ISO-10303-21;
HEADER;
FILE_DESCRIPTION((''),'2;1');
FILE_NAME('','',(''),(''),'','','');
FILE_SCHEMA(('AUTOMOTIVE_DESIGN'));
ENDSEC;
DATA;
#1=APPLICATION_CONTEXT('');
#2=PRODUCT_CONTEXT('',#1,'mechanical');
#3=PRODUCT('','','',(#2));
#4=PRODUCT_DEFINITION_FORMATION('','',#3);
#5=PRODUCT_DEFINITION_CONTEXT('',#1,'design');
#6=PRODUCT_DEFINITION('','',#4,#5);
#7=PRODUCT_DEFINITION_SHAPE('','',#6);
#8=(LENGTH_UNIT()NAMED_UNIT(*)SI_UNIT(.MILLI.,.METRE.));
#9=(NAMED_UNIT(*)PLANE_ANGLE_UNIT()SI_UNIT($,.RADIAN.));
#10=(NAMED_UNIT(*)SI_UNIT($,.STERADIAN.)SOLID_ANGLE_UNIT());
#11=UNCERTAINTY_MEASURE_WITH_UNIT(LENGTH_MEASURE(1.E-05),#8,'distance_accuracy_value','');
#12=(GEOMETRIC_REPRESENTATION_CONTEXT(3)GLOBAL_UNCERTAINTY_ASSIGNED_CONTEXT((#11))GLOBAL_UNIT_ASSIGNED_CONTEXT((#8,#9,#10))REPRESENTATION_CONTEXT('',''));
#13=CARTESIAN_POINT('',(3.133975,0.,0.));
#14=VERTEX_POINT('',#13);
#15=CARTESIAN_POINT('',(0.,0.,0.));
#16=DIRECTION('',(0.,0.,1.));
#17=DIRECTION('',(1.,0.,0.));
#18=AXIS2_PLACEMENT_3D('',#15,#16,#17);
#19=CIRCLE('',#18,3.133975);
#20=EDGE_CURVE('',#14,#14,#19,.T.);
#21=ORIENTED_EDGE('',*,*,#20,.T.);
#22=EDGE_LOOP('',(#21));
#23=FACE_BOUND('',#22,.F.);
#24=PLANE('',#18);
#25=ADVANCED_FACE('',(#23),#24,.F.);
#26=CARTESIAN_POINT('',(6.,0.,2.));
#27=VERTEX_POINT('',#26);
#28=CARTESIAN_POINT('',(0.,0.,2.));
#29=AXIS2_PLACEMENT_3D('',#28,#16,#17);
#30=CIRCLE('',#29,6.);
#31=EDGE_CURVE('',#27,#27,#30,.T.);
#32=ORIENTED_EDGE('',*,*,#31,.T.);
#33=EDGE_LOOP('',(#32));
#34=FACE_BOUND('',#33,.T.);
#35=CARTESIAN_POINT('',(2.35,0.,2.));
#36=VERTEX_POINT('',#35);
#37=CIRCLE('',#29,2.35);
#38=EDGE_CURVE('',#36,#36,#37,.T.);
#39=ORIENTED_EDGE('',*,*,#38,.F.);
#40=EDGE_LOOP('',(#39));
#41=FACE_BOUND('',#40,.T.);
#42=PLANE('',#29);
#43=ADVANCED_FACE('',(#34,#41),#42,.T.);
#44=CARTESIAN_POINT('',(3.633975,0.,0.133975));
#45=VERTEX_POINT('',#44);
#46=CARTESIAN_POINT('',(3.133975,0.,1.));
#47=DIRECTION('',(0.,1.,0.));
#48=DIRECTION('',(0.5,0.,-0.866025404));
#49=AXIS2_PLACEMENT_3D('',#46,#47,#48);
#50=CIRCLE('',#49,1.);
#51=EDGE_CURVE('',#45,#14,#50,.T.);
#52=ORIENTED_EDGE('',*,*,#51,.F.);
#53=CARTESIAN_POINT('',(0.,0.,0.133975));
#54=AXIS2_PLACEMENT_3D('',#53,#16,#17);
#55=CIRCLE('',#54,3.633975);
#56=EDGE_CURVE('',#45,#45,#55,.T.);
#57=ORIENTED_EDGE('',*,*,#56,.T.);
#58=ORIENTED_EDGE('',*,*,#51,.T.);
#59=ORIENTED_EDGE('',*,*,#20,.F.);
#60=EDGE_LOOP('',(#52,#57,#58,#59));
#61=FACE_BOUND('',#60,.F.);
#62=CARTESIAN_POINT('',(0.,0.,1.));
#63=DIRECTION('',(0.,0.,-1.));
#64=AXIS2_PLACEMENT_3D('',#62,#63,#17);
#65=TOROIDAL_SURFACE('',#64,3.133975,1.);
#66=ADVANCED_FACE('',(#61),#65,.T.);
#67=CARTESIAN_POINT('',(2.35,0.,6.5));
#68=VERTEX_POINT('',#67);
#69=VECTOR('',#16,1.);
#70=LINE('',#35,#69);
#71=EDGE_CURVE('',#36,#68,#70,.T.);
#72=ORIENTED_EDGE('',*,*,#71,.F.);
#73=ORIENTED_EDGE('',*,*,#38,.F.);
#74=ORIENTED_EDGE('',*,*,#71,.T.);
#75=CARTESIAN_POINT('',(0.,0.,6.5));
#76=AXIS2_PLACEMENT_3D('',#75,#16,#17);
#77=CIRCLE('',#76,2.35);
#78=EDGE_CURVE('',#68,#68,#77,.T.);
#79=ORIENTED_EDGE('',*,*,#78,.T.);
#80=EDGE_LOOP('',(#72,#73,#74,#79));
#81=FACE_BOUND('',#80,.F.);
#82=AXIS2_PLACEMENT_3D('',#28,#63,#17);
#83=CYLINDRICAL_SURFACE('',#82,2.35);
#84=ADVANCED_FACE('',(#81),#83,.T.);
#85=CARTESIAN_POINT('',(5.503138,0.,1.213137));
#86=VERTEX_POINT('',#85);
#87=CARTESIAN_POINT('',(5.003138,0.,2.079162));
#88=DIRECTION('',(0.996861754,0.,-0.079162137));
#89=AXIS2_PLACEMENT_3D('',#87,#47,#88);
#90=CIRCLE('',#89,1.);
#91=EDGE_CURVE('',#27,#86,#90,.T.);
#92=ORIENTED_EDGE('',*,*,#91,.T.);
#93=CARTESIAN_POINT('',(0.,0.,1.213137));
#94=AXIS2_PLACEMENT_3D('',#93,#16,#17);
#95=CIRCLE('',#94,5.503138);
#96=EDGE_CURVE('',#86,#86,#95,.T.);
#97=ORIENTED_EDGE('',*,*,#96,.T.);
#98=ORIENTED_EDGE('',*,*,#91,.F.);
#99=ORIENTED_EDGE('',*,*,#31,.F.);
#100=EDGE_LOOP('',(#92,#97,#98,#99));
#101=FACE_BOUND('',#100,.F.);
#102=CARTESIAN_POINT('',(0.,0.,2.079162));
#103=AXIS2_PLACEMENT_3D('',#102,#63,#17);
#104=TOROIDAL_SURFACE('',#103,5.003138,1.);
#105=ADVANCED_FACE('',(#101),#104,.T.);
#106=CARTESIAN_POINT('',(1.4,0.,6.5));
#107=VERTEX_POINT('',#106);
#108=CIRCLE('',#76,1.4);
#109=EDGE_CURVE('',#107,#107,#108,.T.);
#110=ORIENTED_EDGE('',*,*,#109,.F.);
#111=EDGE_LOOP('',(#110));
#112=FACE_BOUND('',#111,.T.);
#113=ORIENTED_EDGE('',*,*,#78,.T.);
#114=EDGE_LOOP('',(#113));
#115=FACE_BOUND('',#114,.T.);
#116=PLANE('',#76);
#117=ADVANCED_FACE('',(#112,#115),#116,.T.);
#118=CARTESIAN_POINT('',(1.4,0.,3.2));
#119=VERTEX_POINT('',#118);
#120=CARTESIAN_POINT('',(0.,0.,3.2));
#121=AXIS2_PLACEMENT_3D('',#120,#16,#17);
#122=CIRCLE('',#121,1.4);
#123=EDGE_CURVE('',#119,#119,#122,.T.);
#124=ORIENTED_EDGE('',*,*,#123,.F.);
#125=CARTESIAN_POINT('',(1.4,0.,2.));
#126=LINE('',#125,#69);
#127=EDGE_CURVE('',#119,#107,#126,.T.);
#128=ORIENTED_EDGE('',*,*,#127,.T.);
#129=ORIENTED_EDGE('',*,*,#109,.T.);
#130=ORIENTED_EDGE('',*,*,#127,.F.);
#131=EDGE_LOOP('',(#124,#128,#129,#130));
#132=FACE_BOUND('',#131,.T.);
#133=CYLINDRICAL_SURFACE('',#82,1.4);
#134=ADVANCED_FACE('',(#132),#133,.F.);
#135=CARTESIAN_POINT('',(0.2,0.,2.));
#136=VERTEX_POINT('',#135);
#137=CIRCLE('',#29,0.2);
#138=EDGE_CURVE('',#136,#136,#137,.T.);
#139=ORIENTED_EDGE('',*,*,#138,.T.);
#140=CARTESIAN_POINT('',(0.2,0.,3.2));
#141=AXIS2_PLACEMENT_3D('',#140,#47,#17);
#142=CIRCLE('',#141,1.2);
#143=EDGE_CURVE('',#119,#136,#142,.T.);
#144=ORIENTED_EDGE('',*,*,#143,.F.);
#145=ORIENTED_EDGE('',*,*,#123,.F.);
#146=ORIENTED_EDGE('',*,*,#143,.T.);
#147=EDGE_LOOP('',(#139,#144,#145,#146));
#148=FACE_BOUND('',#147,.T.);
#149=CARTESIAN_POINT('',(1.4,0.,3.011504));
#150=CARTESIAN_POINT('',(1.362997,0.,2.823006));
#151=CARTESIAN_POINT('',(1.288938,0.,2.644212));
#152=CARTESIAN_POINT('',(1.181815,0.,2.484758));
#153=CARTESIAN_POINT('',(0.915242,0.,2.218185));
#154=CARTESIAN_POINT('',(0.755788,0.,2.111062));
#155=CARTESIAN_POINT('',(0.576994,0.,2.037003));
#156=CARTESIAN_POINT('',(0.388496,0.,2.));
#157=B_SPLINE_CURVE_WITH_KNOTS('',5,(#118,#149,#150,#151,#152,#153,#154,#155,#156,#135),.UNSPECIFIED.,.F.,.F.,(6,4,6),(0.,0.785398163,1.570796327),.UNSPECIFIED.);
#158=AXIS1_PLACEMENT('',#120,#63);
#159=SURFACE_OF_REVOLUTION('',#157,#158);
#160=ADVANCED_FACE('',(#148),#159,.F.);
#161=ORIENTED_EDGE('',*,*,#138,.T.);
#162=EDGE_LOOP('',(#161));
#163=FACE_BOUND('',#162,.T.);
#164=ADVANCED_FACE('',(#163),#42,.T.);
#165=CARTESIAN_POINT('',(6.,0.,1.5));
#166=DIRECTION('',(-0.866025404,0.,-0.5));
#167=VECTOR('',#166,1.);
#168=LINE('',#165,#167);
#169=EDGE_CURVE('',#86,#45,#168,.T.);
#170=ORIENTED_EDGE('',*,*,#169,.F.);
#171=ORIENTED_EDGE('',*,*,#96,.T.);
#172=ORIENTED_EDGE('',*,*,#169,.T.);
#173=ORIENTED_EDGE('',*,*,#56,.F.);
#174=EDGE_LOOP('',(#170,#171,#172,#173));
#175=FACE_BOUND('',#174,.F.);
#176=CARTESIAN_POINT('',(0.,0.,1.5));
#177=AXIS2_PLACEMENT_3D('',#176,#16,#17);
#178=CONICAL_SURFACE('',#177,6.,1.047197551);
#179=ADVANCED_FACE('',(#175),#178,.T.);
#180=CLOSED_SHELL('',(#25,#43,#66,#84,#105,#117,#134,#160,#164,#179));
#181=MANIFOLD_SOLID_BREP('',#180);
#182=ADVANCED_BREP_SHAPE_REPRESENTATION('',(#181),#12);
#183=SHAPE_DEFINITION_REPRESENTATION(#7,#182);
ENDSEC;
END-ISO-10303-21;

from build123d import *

# Parameters (mm, degrees)
F0_R     = 6
F1_DEPTH = 2
F2_SIZE2 = 2.5980762114
F2_SIZE  = 1.5
F4_R     = 2.35
F4_R_2   = 1.4
F5_DEPTH = 4.5
F6_R     = 1.2


# Not quite as in the source:
# - a fillet or chamfer that OpenCascade refuses, or shapes differently, is made with other operations: its cross-section is extruded or revolved along the edge and cut away or added


with BuildPart() as f1:
    # F0 (on Top) → F1 (new body)
    with BuildSketch(Plane.XY):
        Circle(F0_R)
    extrude(amount=F1_DEPTH)

    # F2
    f2_edges = [f1.edges().sort_by_distance(p)[0] for p in [
        (-6, 0, 0),
    ]]
    f2_side = f1.faces().sort_by_distance((-6, 0, 1))[0]
    chamfer(f2_edges, length=F2_SIZE, length2=F2_SIZE2, reference=f2_side)

    # F3: fillet of radius 1 on 2 edges, made by hand

    # F3_s1 → F3_t2 (revolve, cut)
    with BuildSketch(Plane.XZ):
        with BuildLine():
            ThreePointArc((3.6339745962, 0.1339745962), (3.3927936413, 0.0340741737), (3.1339745962, 0))
            Line((3.1339745962, 0), (3.4019237886, 0))
            Line((3.4019237886, 0), (3.6339745962, 0.1339745962))
        make_face()
    revolve(axis=Axis((0, 0, 0), (0, 0, 1)), mode=Mode.SUBTRACT)

    # F3_s3 → F3_t4 (revolve, cut)
    with BuildSketch(Plane.XZ):
        with BuildLine():
            ThreePointArc((6, 2), (5.8486778537, 1.5452494356), (5.5031382462, 1.2131367327))
            Line((5.5031382462, 1.2131367327), (6, 1.5))
            Line((6, 1.5), (6, 2))
        make_face()
    revolve(axis=Axis((0, 0, 1.5), (0, 0, 1)), mode=Mode.SUBTRACT)

    # F4 (on face) → F5 (join)
    with BuildSketch(Plane.XY.offset(2)):
        Circle(F4_R)
        Circle(F4_R_2, mode=Mode.SUBTRACT)
    extrude(amount=F5_DEPTH)

    # F6
    f6_edges = [f1.edges().sort_by_distance(p)[0] for p in [
        (-1.4, 0, 2),
    ]]
    fillet(f6_edges, radius=F6_R)


solid = f1.part
